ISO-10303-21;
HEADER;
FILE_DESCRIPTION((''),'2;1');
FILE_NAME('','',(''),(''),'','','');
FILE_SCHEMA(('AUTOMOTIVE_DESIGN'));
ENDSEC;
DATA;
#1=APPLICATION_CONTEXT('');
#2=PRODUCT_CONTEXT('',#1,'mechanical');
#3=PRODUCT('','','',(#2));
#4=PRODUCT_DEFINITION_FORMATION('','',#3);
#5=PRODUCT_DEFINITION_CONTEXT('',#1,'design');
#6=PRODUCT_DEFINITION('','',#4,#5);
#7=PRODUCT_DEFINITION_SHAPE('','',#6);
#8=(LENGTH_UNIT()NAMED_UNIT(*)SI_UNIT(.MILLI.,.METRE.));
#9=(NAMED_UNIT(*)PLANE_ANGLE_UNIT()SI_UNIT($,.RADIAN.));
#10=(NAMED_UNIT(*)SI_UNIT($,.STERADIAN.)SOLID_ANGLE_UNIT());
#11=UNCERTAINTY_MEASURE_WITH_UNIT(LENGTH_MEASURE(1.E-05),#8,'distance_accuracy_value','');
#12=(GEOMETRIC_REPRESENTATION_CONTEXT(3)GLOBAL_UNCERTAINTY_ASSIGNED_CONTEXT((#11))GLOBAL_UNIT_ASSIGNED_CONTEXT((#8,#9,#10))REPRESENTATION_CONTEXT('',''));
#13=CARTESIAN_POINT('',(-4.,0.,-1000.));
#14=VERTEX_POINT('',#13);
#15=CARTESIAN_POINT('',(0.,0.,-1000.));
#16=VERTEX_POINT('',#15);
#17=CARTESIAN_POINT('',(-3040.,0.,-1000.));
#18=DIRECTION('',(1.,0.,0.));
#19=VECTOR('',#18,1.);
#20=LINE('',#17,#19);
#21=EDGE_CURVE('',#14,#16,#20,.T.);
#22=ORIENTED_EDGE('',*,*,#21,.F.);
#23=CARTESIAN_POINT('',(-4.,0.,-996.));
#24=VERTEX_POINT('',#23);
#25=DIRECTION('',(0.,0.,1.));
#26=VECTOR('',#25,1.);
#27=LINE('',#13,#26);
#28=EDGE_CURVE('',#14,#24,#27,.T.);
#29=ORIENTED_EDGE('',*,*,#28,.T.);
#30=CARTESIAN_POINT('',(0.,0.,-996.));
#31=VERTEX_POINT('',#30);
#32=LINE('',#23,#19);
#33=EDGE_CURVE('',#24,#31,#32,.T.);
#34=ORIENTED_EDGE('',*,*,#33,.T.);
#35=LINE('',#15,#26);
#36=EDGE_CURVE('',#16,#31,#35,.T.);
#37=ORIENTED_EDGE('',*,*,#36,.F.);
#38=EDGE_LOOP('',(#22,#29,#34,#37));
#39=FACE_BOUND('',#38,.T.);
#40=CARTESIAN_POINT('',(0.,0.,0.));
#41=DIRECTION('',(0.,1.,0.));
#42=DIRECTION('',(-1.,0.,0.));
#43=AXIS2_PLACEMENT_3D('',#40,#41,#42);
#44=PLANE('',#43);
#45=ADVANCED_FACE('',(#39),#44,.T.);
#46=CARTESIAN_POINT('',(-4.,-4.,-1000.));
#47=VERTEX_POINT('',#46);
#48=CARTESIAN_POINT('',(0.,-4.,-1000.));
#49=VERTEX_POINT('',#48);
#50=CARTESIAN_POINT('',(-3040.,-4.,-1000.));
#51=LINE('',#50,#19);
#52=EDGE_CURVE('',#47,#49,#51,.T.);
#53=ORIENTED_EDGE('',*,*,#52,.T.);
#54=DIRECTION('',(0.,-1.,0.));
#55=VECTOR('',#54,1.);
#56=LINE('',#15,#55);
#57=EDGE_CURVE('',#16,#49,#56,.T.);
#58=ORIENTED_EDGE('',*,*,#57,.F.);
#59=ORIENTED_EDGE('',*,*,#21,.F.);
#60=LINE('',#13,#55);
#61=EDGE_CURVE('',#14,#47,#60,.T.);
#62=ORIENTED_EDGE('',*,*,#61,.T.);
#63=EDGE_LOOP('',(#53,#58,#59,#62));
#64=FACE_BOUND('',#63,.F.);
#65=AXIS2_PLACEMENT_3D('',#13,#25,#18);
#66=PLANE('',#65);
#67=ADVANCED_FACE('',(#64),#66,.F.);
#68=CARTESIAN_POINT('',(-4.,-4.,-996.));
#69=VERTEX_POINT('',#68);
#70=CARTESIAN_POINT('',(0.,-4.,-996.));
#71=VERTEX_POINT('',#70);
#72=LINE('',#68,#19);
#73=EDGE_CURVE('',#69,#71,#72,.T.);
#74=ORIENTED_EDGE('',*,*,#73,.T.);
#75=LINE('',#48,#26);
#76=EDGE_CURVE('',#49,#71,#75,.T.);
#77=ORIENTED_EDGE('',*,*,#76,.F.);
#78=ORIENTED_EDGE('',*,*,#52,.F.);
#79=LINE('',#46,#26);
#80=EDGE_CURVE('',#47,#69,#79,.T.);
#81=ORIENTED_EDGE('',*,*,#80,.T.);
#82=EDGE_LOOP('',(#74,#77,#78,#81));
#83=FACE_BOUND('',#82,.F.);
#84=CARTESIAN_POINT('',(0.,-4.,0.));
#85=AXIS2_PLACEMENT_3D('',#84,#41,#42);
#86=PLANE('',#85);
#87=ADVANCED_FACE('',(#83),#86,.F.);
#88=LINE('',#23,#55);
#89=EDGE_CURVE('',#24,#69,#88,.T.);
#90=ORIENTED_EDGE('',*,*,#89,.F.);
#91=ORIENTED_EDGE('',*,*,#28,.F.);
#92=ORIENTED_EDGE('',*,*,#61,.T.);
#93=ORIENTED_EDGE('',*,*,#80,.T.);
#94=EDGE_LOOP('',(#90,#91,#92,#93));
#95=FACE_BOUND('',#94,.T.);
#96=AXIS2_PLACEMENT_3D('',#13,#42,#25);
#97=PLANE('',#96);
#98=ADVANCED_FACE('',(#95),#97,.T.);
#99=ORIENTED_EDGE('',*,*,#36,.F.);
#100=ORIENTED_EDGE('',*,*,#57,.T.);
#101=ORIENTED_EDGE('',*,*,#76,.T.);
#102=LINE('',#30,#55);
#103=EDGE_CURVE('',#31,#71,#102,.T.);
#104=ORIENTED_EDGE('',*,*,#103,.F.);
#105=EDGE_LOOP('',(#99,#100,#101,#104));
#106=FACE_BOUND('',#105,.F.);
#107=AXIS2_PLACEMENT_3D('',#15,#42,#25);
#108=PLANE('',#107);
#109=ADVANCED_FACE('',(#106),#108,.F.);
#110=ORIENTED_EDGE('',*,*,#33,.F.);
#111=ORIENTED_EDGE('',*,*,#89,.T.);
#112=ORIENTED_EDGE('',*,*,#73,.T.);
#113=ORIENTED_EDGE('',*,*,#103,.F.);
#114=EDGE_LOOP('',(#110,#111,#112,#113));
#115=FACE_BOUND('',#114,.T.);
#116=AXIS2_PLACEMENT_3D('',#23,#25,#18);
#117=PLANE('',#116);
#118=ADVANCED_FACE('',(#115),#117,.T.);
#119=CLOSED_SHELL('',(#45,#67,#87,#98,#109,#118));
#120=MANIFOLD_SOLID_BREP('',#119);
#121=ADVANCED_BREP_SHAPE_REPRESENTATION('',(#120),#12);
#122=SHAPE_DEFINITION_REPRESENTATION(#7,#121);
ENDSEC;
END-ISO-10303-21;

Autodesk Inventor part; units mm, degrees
ref_plane "YZ Plane" through (0, 0, 0) normal (1, 0, 0) x (0, 1, 0)
ref_plane "XZ Plane" through (0, 0, 0) normal (0, 1, 0) x (-1, 0, 0)
ref_plane "XY Plane" through (0, 0, 0) normal (0, 0, 1) x (1, 0, 0)
sketch "Sketch1" plane through (0, 0, 0) normal (0, 1, 0) x (-1, 0, 0)
  line L0 (0, 0) -> (3040, 0)
  line L1 (3040, 0) -> (3040, -1000)
  line L2 (3040, -1000) -> (0, -1000)
  line L3 (0, -1000) -> (0, 0)
  line L4 (0, -1000) -> (4, -1000)
  line L5 (4, -1000) -> (4, -996)
  line L6 (4, -996) -> (0, -996)
  line L7 (0, -996) -> (0, -1000)
  point P0 (0, -996)
  dimension "d0" = 1000
  dimension "d1" = 3040
  dimension "d3" = 4
  dimension "d4" = 4
boundary_patch "Boundary Patch1"
extrude "Extrusion1" add sketch "Sketch1" against normal blind 4 contours L6 L5 L2 L3
equation "\"d0\" = conveyorWidth"
equation "\"d1\" = conveyorLength"
equation "\"conveyorWidth\" = 1000"
equation "\"conveyorLength\" = 3040"
properties part number "CONVEYOR SURFACE-01"
